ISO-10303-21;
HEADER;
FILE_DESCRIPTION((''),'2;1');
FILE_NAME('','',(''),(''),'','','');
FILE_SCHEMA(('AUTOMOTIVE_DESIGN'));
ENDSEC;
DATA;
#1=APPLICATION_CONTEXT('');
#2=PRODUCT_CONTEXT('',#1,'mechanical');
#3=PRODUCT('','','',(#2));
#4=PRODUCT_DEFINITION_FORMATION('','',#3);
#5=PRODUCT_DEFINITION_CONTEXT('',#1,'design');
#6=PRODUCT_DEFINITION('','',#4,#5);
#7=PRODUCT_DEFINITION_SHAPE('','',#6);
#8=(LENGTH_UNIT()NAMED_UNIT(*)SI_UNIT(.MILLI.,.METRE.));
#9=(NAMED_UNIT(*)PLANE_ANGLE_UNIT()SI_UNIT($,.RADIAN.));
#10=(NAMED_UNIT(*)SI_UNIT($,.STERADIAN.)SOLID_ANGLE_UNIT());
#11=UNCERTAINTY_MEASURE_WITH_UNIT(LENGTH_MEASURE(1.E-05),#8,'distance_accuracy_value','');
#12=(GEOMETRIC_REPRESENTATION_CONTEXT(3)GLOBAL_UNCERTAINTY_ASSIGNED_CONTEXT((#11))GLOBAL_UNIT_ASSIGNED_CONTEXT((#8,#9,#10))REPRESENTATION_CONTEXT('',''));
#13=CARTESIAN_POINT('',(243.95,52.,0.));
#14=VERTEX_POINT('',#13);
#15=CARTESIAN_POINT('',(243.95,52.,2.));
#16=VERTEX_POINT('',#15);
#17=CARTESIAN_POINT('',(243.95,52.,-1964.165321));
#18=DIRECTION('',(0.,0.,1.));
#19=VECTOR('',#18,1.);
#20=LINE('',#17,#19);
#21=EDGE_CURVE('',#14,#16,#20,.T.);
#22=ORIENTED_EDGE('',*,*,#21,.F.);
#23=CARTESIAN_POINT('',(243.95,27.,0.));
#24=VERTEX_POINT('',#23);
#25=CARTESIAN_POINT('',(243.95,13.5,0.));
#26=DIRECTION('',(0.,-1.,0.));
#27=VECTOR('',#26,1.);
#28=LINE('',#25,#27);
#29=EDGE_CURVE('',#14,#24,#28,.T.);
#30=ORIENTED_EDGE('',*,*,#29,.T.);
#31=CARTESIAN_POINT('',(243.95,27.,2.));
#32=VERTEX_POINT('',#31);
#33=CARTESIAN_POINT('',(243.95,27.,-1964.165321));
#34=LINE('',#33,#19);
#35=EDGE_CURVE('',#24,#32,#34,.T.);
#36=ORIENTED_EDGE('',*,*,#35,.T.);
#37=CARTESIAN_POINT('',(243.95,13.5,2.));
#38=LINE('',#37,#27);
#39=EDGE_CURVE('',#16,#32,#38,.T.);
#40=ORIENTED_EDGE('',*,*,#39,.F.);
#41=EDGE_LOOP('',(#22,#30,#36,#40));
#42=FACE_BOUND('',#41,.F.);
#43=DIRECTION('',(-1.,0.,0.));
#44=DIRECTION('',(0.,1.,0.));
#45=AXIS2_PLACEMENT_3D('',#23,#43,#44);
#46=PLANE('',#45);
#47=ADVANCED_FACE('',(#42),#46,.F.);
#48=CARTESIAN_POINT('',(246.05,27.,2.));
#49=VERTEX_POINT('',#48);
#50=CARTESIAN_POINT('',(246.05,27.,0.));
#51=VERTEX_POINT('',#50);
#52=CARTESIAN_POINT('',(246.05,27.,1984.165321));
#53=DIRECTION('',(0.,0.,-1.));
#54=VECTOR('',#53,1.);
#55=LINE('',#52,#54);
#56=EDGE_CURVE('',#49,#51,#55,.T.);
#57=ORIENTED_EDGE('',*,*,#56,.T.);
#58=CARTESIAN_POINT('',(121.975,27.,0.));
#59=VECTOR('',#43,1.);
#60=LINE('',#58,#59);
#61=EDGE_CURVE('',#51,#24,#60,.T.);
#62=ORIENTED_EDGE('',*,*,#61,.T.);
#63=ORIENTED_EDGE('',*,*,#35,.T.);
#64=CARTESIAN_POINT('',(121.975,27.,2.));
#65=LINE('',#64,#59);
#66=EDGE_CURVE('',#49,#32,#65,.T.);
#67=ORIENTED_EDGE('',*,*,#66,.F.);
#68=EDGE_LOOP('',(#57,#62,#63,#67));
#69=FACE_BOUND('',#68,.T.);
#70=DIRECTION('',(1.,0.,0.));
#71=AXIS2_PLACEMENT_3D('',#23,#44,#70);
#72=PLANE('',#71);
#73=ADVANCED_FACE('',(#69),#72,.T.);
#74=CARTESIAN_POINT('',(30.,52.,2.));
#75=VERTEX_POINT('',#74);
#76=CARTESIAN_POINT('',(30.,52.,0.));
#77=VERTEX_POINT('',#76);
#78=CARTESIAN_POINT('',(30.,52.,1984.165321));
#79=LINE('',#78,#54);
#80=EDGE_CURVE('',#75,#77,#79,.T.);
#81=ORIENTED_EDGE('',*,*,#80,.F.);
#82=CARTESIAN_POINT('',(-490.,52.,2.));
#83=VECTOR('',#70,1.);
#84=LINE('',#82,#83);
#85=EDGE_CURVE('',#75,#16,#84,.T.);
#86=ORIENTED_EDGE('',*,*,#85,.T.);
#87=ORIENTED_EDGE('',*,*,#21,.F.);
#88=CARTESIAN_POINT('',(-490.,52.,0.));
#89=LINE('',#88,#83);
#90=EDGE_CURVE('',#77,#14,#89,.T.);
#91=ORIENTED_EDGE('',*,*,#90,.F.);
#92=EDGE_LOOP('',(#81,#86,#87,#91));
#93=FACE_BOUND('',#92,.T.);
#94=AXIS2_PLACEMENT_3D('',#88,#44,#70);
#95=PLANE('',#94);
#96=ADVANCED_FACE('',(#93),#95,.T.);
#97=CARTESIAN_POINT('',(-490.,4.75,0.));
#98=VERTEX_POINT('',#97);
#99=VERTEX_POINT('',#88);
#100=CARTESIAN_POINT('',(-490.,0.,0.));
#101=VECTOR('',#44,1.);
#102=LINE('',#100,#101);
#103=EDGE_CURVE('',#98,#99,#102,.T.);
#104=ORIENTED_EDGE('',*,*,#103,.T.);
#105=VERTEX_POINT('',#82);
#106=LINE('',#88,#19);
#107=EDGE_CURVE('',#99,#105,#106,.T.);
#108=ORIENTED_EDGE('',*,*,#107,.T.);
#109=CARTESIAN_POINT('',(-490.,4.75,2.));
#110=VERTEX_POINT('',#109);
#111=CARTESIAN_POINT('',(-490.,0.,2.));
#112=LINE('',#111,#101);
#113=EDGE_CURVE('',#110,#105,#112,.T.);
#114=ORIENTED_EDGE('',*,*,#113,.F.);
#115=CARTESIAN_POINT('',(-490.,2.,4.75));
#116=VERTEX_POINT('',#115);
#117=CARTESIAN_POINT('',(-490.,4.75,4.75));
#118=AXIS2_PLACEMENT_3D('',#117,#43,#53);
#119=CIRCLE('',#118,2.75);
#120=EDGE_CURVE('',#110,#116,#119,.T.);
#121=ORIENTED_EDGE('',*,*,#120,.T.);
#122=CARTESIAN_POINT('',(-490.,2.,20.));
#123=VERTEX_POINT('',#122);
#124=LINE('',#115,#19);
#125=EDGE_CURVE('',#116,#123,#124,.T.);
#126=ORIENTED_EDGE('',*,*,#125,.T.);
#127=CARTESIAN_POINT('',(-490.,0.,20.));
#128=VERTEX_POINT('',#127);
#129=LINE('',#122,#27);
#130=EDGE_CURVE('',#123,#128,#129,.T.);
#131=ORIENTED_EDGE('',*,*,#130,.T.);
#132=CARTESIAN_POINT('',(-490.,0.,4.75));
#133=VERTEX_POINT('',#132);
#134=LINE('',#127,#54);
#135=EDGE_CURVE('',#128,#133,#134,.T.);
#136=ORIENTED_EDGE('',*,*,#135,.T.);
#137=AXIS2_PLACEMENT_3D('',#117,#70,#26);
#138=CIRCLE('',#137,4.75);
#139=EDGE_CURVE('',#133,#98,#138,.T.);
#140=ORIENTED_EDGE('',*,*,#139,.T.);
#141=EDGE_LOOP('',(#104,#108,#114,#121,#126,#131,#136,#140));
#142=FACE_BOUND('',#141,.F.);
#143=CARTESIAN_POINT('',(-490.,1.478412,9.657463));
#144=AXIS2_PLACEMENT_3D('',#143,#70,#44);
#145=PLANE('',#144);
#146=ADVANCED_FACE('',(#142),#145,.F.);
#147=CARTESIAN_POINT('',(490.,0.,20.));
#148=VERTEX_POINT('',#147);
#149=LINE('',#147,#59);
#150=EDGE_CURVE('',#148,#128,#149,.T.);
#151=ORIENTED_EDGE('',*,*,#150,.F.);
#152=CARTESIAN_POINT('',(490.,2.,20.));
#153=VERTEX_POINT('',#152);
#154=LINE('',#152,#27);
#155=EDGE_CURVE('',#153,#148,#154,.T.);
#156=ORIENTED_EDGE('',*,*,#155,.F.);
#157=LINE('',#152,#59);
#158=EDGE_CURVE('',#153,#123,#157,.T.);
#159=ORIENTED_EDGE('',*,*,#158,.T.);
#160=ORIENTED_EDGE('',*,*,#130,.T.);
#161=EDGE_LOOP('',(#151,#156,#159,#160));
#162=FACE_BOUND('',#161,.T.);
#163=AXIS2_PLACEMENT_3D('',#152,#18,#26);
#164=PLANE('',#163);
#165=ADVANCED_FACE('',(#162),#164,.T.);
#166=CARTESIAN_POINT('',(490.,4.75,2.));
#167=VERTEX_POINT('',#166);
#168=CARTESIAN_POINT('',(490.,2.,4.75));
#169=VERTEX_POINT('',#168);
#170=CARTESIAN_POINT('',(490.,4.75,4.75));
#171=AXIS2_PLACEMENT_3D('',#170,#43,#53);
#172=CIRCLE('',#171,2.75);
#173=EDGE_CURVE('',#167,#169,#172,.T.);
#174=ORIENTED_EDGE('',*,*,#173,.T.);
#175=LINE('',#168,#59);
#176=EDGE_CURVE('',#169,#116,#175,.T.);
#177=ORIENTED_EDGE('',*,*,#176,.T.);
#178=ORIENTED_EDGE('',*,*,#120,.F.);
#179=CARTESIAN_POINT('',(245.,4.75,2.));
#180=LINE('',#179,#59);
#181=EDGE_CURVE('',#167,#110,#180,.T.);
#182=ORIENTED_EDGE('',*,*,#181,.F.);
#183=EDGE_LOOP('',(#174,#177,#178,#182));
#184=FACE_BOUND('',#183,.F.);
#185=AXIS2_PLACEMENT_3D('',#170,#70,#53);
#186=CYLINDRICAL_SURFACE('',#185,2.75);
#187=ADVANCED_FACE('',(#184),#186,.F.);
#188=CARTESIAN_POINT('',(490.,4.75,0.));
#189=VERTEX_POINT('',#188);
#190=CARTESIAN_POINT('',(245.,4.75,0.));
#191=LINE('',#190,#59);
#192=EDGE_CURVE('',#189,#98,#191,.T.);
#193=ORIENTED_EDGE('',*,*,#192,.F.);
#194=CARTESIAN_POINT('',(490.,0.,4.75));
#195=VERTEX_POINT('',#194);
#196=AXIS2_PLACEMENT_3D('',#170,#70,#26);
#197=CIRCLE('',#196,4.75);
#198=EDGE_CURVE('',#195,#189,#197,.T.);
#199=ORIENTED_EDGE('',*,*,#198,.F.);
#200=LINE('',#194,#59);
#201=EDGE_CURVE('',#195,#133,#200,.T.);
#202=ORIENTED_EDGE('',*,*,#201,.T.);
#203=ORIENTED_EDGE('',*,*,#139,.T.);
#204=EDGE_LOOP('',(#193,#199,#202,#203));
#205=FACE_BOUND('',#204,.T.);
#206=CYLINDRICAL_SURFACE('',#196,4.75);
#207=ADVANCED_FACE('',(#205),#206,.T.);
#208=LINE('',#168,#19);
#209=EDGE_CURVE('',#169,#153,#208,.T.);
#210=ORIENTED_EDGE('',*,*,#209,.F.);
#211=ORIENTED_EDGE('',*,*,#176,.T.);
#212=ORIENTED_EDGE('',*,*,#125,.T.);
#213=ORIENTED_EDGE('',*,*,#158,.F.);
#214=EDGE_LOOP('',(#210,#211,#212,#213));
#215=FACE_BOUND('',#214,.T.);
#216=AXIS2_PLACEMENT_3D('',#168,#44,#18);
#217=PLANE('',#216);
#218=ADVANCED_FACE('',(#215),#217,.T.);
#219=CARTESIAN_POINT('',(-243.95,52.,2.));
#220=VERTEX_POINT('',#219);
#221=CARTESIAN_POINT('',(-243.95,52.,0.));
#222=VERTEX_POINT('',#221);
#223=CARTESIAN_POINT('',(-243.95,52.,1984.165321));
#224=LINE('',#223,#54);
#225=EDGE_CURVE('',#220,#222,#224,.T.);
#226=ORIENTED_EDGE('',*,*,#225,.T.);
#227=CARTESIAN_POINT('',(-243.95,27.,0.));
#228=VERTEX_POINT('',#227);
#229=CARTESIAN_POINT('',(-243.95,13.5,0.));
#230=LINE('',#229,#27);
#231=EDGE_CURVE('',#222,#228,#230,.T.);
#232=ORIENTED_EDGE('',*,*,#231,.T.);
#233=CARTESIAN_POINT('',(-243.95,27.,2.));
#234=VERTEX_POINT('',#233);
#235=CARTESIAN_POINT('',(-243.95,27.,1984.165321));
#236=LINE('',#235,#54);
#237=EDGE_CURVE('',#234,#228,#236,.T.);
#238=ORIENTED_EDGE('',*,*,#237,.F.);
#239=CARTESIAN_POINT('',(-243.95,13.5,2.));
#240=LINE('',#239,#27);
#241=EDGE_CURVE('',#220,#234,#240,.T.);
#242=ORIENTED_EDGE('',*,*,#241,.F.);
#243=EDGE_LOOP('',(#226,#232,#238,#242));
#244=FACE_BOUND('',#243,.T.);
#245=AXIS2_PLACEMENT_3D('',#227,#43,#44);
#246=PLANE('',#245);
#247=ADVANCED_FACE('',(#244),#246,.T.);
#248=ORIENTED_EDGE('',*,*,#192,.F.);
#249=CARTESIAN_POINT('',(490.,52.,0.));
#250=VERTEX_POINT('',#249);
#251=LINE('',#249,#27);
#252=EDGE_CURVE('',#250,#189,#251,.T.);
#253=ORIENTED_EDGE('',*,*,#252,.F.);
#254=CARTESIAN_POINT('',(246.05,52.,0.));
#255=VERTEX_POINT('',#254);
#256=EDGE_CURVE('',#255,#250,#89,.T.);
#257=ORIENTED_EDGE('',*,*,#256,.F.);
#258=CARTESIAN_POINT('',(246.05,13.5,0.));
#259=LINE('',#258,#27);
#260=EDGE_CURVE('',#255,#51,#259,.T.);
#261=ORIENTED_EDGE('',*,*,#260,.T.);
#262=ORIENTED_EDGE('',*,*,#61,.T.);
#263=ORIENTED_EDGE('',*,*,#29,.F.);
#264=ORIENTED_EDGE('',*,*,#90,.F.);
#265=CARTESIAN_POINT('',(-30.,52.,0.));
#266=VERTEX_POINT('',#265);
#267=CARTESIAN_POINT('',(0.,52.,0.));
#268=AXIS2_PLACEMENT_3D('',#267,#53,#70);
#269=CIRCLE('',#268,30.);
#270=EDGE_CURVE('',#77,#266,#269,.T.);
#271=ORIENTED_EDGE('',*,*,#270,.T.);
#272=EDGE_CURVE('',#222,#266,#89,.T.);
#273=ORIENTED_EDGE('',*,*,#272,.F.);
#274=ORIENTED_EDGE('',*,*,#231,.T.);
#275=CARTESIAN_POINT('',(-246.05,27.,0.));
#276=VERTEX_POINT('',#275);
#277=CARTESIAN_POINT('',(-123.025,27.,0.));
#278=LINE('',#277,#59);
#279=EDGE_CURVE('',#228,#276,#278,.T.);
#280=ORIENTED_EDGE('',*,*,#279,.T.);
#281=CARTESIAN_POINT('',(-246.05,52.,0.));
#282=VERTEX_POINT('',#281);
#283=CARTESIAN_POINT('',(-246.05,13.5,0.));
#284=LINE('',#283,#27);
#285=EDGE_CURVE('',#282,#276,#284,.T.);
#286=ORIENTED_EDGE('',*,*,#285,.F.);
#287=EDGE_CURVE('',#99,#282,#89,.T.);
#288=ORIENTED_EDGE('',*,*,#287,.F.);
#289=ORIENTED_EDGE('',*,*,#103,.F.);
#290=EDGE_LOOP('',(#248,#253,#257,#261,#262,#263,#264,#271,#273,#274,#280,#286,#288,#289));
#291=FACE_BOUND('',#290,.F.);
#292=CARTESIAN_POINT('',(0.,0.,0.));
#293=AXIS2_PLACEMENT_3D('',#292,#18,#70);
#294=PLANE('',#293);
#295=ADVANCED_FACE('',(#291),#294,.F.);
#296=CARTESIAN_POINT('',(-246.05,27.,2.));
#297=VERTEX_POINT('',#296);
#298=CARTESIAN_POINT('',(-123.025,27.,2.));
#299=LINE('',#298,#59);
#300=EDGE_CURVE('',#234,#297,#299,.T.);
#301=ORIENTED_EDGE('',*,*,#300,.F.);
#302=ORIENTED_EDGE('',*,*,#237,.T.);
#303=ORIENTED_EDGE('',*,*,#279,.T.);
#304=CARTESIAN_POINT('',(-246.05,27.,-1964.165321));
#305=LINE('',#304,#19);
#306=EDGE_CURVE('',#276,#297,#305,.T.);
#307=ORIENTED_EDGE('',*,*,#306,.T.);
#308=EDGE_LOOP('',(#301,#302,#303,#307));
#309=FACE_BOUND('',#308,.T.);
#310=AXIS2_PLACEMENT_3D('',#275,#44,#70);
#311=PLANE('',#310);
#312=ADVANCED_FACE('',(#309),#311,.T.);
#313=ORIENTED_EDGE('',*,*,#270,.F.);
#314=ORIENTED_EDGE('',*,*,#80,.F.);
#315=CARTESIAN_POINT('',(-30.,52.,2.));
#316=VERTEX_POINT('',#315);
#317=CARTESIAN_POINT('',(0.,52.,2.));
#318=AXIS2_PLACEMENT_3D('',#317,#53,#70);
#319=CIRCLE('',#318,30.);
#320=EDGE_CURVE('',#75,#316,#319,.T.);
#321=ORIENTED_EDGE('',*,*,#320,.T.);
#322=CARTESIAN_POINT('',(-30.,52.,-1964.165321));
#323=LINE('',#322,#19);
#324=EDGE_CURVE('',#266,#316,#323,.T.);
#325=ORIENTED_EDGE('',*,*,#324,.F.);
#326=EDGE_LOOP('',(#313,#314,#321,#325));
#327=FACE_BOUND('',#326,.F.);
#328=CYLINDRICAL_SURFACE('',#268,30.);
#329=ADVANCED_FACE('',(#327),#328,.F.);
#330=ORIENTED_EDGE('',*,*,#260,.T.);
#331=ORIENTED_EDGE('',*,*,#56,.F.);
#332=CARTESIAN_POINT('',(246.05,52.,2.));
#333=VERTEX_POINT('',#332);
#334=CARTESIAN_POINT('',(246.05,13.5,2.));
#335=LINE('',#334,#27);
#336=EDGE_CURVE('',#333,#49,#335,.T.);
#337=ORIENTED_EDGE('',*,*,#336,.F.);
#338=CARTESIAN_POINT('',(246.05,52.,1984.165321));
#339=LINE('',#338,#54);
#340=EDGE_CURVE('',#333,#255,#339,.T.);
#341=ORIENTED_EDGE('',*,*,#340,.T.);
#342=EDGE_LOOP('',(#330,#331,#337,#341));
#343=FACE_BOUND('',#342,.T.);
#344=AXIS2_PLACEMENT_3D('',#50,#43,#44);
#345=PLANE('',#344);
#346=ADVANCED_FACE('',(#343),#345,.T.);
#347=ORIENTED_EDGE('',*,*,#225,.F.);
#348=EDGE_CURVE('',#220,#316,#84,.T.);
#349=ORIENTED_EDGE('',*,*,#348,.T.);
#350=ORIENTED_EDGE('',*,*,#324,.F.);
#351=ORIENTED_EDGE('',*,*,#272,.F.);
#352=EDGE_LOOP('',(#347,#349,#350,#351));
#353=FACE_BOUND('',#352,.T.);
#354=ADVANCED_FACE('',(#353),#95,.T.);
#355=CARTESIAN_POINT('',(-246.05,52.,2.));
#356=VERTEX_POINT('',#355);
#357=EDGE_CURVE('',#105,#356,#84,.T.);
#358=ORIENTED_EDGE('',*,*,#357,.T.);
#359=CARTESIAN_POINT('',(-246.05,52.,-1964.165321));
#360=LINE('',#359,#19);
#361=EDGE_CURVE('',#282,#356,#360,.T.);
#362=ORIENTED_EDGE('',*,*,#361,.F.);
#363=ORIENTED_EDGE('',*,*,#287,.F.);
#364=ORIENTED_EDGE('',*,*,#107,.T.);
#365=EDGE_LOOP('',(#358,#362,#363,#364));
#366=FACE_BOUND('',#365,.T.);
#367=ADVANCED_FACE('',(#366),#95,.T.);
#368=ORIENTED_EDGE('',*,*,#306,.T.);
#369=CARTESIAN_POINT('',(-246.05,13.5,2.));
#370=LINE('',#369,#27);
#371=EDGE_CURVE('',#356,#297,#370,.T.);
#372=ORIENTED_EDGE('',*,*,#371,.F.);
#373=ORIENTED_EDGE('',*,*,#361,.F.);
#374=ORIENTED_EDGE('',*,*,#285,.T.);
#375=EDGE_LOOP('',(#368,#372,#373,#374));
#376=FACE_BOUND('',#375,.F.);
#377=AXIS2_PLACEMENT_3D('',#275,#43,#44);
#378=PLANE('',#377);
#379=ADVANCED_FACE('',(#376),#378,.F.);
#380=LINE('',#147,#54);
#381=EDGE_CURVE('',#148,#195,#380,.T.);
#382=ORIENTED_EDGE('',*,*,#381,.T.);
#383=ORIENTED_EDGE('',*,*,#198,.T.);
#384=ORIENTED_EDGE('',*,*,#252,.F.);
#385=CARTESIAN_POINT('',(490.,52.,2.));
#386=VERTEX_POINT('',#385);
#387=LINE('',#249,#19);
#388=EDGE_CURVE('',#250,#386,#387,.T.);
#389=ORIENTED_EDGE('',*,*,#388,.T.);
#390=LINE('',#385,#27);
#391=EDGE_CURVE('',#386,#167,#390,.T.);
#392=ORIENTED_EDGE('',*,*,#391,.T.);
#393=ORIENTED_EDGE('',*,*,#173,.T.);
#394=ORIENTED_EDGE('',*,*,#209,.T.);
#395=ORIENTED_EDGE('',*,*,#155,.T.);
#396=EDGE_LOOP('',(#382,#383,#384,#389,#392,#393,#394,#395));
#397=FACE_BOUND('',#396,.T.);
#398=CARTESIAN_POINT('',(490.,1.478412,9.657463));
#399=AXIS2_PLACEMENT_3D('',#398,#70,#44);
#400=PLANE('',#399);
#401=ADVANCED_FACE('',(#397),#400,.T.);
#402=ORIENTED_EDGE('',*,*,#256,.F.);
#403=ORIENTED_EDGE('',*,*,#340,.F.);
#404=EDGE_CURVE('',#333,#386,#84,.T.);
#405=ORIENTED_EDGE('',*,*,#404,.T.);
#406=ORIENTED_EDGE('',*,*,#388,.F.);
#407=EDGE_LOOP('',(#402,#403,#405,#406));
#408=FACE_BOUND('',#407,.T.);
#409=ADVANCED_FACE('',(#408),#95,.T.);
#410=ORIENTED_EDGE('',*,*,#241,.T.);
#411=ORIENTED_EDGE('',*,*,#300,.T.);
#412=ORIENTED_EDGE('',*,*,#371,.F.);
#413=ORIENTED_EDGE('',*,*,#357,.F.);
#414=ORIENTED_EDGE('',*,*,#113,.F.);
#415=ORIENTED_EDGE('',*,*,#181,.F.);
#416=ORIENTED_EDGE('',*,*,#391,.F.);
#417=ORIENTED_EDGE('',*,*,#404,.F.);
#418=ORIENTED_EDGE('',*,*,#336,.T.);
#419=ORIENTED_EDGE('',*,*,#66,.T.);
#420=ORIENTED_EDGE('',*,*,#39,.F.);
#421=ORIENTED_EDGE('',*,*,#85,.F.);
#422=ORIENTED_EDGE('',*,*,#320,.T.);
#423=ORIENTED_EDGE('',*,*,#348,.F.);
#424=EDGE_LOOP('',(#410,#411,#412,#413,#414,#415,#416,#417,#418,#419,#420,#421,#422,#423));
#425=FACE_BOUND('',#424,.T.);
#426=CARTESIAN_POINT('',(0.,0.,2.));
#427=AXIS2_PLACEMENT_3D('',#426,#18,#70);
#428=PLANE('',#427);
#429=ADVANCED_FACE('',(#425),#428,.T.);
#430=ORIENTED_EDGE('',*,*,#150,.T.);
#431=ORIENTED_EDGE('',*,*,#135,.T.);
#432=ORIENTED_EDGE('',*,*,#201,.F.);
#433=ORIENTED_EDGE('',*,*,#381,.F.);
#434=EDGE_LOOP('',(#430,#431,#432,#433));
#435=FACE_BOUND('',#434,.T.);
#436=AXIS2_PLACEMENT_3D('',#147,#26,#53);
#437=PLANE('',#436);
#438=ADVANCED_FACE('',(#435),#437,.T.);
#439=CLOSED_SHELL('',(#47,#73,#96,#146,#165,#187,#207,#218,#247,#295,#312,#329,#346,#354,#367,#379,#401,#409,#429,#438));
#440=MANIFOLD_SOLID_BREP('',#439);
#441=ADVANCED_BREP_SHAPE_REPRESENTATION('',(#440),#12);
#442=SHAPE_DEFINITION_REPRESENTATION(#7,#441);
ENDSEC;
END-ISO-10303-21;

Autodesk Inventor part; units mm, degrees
ref_plane "YZ Plane" through (0, 0, 0) normal (1, 0, 0) x (0, 1, 0)
ref_plane "XZ Plane" through (0, 0, 0) normal (0, 1, 0) x (-1, 0, 0)
ref_plane "XY Plane" through (0, 0, 0) normal (0, 0, 1) x (1, 0, 0)
sketch "Sketch1" plane through (0, 0, 0) normal (0, 0, 1) x (1, 0, 0)
  line L0 (-490, 52) -> (490, 52)
  line L1 (490, 52) -> (490, 0)
  line L2 (490, 0) -> (-490, 0)
  line L3 (-490, 0) -> (-490, 52)
  point P0 (0, 0)
  point P1 (0, 0)
  dimension "d0" = 980
  dimension "d1" = 52
extrude "Plate1" add sketch "Sketch1" along normal blind 2
sketch "Sketch2" plane through (490, 2, 0) normal (0, -1, 0) x (1, 0, 0)
  line L0 (-980, 0) -> (0, 0)
  line L1 (0, 0) -> (0, 20)
  line L2 (0, 20) -> (-980, 20)
  line L3 (-980, 20) -> (-980, 0)
edge flange "Flange1" height 20 angle 90 thickness 2 bend radius 2.75 thickness toward (0, -1, 0) relief round relief width 2 relief depth 1 edges at (0, 0, 2) wall of the first edge with corners at (-490, 2, 0) (490, 2, 0) (490, 2, 20) (-490, 2, 20)
bend "Bend1"
corner "Corner1"
sketch "Sketch11" plane through (0, 0, 0) normal (0, 0, 1) x (1, 0, 0)
  line L0 (-490, 52) -> (490, 52) projected
  circle A0 centre (0, 52) radius 30
  line L1 (-490, 0) -> (490, 0) projected
  line L2 (246.05, 0) -> (243.95, 0)
  line L3 (243.95, 0) -> (243.95, 27)
  line L4 (243.95, 27) -> (246.05, 27)
  line L5 (246.05, 27) -> (246.05, 0)
  line L6 (-243.95, 0) -> (-246.05, 0)
  line L7 (-246.05, 0) -> (-246.05, 27)
  line L8 (-246.05, 27) -> (-243.95, 27)
  line L9 (-243.95, 27) -> (-243.95, 0)
  line L10 (0, 52) -> (0, 0) construction
  line L11 (246.05, 27) -> (246.05, 52)
  line L12 (243.95, 27) -> (243.95, 52)
  line L13 (-243.95, 27) -> (-243.95, 52)
  line L14 (-246.05, 27) -> (-246.05, 52)
  point P0 (30, 52)
  point P1 (-30, 52)
  point P2 (-245, 27)
  point P3 (245, 27)
  dimension "d44" = 60
  dimension "d47" = 2.1
  dimension "d49" = 490
  dimension "d50" = 27
extrude "Extrusion4" cut sketch "Sketch11" along normal through all both and the other way through all contours L0 L13 L8 L14 | L0 A0 | L0 L11 L4 L12 picked at (3.546, 42.6498)
sketch "Sketch9" plane through (0, 0, 2) normal (0, 0, 1) x (1, 0, 0)
  line L0 (475.4727, 47) -> (475.4727, 35) construction
  line L1 (475.4727, 35) -> (275.4727, 35) construction
  line L2 (275.4727, 35) -> (275.4727, 47) construction
  line L3 (275.4727, 47) -> (475.4727, 47) construction
  line L4 (-490, 52) -> (490, 52) projected
  point P0 (0, 0)
  point P1 (1, 52)
  dimension "d38" = 200
  dimension "d39" = 12
  dimension "d43" = 5
mark "Mark3"
equation "\"d1\" = СПИНА_Стрингер_1_высота"
equation "\"d43\" = d42"
equation "\"d2\" = Thickness"
equation "\"d3\" = BendReliefWidth"
equation "\"d4\" = BendReliefDepth"
equation "\"d5\" = MinimumRemnant"
equation "\"d6\" = TransitionRadius"
equation "\"d9\" = BendRadius"
equation "\"d10\" = CornerReliefSize"
equation "\"d11\" = GapSize"
equation "\"d12\" = JacobiRadiusSize"
equation "\"BendReliefWidth\" = Thickness"
equation "\"BendReliefDepth\" = 0.5 * Thickness"
equation "\"CornerReliefSize\" = 4 * Thickness"
equation "\"MinimumRemnant\" = 2 * Thickness"
equation "\"TransitionRadius\" = BendRadius"
equation "\"JacobiRadiusSize\" = BendRadius"
equation "\"GapSize\" = Thickness"
equation "\"СПИНА_Стрингер_1_высота\" = 52"
equation "\"d42\" = 5"
equation "\"Thickness\" = 2"
equation "\"BendRadius\" = 2.75"
properties part number "MSC 205 STRINGER BACK ^" material "Stainless Steel"
